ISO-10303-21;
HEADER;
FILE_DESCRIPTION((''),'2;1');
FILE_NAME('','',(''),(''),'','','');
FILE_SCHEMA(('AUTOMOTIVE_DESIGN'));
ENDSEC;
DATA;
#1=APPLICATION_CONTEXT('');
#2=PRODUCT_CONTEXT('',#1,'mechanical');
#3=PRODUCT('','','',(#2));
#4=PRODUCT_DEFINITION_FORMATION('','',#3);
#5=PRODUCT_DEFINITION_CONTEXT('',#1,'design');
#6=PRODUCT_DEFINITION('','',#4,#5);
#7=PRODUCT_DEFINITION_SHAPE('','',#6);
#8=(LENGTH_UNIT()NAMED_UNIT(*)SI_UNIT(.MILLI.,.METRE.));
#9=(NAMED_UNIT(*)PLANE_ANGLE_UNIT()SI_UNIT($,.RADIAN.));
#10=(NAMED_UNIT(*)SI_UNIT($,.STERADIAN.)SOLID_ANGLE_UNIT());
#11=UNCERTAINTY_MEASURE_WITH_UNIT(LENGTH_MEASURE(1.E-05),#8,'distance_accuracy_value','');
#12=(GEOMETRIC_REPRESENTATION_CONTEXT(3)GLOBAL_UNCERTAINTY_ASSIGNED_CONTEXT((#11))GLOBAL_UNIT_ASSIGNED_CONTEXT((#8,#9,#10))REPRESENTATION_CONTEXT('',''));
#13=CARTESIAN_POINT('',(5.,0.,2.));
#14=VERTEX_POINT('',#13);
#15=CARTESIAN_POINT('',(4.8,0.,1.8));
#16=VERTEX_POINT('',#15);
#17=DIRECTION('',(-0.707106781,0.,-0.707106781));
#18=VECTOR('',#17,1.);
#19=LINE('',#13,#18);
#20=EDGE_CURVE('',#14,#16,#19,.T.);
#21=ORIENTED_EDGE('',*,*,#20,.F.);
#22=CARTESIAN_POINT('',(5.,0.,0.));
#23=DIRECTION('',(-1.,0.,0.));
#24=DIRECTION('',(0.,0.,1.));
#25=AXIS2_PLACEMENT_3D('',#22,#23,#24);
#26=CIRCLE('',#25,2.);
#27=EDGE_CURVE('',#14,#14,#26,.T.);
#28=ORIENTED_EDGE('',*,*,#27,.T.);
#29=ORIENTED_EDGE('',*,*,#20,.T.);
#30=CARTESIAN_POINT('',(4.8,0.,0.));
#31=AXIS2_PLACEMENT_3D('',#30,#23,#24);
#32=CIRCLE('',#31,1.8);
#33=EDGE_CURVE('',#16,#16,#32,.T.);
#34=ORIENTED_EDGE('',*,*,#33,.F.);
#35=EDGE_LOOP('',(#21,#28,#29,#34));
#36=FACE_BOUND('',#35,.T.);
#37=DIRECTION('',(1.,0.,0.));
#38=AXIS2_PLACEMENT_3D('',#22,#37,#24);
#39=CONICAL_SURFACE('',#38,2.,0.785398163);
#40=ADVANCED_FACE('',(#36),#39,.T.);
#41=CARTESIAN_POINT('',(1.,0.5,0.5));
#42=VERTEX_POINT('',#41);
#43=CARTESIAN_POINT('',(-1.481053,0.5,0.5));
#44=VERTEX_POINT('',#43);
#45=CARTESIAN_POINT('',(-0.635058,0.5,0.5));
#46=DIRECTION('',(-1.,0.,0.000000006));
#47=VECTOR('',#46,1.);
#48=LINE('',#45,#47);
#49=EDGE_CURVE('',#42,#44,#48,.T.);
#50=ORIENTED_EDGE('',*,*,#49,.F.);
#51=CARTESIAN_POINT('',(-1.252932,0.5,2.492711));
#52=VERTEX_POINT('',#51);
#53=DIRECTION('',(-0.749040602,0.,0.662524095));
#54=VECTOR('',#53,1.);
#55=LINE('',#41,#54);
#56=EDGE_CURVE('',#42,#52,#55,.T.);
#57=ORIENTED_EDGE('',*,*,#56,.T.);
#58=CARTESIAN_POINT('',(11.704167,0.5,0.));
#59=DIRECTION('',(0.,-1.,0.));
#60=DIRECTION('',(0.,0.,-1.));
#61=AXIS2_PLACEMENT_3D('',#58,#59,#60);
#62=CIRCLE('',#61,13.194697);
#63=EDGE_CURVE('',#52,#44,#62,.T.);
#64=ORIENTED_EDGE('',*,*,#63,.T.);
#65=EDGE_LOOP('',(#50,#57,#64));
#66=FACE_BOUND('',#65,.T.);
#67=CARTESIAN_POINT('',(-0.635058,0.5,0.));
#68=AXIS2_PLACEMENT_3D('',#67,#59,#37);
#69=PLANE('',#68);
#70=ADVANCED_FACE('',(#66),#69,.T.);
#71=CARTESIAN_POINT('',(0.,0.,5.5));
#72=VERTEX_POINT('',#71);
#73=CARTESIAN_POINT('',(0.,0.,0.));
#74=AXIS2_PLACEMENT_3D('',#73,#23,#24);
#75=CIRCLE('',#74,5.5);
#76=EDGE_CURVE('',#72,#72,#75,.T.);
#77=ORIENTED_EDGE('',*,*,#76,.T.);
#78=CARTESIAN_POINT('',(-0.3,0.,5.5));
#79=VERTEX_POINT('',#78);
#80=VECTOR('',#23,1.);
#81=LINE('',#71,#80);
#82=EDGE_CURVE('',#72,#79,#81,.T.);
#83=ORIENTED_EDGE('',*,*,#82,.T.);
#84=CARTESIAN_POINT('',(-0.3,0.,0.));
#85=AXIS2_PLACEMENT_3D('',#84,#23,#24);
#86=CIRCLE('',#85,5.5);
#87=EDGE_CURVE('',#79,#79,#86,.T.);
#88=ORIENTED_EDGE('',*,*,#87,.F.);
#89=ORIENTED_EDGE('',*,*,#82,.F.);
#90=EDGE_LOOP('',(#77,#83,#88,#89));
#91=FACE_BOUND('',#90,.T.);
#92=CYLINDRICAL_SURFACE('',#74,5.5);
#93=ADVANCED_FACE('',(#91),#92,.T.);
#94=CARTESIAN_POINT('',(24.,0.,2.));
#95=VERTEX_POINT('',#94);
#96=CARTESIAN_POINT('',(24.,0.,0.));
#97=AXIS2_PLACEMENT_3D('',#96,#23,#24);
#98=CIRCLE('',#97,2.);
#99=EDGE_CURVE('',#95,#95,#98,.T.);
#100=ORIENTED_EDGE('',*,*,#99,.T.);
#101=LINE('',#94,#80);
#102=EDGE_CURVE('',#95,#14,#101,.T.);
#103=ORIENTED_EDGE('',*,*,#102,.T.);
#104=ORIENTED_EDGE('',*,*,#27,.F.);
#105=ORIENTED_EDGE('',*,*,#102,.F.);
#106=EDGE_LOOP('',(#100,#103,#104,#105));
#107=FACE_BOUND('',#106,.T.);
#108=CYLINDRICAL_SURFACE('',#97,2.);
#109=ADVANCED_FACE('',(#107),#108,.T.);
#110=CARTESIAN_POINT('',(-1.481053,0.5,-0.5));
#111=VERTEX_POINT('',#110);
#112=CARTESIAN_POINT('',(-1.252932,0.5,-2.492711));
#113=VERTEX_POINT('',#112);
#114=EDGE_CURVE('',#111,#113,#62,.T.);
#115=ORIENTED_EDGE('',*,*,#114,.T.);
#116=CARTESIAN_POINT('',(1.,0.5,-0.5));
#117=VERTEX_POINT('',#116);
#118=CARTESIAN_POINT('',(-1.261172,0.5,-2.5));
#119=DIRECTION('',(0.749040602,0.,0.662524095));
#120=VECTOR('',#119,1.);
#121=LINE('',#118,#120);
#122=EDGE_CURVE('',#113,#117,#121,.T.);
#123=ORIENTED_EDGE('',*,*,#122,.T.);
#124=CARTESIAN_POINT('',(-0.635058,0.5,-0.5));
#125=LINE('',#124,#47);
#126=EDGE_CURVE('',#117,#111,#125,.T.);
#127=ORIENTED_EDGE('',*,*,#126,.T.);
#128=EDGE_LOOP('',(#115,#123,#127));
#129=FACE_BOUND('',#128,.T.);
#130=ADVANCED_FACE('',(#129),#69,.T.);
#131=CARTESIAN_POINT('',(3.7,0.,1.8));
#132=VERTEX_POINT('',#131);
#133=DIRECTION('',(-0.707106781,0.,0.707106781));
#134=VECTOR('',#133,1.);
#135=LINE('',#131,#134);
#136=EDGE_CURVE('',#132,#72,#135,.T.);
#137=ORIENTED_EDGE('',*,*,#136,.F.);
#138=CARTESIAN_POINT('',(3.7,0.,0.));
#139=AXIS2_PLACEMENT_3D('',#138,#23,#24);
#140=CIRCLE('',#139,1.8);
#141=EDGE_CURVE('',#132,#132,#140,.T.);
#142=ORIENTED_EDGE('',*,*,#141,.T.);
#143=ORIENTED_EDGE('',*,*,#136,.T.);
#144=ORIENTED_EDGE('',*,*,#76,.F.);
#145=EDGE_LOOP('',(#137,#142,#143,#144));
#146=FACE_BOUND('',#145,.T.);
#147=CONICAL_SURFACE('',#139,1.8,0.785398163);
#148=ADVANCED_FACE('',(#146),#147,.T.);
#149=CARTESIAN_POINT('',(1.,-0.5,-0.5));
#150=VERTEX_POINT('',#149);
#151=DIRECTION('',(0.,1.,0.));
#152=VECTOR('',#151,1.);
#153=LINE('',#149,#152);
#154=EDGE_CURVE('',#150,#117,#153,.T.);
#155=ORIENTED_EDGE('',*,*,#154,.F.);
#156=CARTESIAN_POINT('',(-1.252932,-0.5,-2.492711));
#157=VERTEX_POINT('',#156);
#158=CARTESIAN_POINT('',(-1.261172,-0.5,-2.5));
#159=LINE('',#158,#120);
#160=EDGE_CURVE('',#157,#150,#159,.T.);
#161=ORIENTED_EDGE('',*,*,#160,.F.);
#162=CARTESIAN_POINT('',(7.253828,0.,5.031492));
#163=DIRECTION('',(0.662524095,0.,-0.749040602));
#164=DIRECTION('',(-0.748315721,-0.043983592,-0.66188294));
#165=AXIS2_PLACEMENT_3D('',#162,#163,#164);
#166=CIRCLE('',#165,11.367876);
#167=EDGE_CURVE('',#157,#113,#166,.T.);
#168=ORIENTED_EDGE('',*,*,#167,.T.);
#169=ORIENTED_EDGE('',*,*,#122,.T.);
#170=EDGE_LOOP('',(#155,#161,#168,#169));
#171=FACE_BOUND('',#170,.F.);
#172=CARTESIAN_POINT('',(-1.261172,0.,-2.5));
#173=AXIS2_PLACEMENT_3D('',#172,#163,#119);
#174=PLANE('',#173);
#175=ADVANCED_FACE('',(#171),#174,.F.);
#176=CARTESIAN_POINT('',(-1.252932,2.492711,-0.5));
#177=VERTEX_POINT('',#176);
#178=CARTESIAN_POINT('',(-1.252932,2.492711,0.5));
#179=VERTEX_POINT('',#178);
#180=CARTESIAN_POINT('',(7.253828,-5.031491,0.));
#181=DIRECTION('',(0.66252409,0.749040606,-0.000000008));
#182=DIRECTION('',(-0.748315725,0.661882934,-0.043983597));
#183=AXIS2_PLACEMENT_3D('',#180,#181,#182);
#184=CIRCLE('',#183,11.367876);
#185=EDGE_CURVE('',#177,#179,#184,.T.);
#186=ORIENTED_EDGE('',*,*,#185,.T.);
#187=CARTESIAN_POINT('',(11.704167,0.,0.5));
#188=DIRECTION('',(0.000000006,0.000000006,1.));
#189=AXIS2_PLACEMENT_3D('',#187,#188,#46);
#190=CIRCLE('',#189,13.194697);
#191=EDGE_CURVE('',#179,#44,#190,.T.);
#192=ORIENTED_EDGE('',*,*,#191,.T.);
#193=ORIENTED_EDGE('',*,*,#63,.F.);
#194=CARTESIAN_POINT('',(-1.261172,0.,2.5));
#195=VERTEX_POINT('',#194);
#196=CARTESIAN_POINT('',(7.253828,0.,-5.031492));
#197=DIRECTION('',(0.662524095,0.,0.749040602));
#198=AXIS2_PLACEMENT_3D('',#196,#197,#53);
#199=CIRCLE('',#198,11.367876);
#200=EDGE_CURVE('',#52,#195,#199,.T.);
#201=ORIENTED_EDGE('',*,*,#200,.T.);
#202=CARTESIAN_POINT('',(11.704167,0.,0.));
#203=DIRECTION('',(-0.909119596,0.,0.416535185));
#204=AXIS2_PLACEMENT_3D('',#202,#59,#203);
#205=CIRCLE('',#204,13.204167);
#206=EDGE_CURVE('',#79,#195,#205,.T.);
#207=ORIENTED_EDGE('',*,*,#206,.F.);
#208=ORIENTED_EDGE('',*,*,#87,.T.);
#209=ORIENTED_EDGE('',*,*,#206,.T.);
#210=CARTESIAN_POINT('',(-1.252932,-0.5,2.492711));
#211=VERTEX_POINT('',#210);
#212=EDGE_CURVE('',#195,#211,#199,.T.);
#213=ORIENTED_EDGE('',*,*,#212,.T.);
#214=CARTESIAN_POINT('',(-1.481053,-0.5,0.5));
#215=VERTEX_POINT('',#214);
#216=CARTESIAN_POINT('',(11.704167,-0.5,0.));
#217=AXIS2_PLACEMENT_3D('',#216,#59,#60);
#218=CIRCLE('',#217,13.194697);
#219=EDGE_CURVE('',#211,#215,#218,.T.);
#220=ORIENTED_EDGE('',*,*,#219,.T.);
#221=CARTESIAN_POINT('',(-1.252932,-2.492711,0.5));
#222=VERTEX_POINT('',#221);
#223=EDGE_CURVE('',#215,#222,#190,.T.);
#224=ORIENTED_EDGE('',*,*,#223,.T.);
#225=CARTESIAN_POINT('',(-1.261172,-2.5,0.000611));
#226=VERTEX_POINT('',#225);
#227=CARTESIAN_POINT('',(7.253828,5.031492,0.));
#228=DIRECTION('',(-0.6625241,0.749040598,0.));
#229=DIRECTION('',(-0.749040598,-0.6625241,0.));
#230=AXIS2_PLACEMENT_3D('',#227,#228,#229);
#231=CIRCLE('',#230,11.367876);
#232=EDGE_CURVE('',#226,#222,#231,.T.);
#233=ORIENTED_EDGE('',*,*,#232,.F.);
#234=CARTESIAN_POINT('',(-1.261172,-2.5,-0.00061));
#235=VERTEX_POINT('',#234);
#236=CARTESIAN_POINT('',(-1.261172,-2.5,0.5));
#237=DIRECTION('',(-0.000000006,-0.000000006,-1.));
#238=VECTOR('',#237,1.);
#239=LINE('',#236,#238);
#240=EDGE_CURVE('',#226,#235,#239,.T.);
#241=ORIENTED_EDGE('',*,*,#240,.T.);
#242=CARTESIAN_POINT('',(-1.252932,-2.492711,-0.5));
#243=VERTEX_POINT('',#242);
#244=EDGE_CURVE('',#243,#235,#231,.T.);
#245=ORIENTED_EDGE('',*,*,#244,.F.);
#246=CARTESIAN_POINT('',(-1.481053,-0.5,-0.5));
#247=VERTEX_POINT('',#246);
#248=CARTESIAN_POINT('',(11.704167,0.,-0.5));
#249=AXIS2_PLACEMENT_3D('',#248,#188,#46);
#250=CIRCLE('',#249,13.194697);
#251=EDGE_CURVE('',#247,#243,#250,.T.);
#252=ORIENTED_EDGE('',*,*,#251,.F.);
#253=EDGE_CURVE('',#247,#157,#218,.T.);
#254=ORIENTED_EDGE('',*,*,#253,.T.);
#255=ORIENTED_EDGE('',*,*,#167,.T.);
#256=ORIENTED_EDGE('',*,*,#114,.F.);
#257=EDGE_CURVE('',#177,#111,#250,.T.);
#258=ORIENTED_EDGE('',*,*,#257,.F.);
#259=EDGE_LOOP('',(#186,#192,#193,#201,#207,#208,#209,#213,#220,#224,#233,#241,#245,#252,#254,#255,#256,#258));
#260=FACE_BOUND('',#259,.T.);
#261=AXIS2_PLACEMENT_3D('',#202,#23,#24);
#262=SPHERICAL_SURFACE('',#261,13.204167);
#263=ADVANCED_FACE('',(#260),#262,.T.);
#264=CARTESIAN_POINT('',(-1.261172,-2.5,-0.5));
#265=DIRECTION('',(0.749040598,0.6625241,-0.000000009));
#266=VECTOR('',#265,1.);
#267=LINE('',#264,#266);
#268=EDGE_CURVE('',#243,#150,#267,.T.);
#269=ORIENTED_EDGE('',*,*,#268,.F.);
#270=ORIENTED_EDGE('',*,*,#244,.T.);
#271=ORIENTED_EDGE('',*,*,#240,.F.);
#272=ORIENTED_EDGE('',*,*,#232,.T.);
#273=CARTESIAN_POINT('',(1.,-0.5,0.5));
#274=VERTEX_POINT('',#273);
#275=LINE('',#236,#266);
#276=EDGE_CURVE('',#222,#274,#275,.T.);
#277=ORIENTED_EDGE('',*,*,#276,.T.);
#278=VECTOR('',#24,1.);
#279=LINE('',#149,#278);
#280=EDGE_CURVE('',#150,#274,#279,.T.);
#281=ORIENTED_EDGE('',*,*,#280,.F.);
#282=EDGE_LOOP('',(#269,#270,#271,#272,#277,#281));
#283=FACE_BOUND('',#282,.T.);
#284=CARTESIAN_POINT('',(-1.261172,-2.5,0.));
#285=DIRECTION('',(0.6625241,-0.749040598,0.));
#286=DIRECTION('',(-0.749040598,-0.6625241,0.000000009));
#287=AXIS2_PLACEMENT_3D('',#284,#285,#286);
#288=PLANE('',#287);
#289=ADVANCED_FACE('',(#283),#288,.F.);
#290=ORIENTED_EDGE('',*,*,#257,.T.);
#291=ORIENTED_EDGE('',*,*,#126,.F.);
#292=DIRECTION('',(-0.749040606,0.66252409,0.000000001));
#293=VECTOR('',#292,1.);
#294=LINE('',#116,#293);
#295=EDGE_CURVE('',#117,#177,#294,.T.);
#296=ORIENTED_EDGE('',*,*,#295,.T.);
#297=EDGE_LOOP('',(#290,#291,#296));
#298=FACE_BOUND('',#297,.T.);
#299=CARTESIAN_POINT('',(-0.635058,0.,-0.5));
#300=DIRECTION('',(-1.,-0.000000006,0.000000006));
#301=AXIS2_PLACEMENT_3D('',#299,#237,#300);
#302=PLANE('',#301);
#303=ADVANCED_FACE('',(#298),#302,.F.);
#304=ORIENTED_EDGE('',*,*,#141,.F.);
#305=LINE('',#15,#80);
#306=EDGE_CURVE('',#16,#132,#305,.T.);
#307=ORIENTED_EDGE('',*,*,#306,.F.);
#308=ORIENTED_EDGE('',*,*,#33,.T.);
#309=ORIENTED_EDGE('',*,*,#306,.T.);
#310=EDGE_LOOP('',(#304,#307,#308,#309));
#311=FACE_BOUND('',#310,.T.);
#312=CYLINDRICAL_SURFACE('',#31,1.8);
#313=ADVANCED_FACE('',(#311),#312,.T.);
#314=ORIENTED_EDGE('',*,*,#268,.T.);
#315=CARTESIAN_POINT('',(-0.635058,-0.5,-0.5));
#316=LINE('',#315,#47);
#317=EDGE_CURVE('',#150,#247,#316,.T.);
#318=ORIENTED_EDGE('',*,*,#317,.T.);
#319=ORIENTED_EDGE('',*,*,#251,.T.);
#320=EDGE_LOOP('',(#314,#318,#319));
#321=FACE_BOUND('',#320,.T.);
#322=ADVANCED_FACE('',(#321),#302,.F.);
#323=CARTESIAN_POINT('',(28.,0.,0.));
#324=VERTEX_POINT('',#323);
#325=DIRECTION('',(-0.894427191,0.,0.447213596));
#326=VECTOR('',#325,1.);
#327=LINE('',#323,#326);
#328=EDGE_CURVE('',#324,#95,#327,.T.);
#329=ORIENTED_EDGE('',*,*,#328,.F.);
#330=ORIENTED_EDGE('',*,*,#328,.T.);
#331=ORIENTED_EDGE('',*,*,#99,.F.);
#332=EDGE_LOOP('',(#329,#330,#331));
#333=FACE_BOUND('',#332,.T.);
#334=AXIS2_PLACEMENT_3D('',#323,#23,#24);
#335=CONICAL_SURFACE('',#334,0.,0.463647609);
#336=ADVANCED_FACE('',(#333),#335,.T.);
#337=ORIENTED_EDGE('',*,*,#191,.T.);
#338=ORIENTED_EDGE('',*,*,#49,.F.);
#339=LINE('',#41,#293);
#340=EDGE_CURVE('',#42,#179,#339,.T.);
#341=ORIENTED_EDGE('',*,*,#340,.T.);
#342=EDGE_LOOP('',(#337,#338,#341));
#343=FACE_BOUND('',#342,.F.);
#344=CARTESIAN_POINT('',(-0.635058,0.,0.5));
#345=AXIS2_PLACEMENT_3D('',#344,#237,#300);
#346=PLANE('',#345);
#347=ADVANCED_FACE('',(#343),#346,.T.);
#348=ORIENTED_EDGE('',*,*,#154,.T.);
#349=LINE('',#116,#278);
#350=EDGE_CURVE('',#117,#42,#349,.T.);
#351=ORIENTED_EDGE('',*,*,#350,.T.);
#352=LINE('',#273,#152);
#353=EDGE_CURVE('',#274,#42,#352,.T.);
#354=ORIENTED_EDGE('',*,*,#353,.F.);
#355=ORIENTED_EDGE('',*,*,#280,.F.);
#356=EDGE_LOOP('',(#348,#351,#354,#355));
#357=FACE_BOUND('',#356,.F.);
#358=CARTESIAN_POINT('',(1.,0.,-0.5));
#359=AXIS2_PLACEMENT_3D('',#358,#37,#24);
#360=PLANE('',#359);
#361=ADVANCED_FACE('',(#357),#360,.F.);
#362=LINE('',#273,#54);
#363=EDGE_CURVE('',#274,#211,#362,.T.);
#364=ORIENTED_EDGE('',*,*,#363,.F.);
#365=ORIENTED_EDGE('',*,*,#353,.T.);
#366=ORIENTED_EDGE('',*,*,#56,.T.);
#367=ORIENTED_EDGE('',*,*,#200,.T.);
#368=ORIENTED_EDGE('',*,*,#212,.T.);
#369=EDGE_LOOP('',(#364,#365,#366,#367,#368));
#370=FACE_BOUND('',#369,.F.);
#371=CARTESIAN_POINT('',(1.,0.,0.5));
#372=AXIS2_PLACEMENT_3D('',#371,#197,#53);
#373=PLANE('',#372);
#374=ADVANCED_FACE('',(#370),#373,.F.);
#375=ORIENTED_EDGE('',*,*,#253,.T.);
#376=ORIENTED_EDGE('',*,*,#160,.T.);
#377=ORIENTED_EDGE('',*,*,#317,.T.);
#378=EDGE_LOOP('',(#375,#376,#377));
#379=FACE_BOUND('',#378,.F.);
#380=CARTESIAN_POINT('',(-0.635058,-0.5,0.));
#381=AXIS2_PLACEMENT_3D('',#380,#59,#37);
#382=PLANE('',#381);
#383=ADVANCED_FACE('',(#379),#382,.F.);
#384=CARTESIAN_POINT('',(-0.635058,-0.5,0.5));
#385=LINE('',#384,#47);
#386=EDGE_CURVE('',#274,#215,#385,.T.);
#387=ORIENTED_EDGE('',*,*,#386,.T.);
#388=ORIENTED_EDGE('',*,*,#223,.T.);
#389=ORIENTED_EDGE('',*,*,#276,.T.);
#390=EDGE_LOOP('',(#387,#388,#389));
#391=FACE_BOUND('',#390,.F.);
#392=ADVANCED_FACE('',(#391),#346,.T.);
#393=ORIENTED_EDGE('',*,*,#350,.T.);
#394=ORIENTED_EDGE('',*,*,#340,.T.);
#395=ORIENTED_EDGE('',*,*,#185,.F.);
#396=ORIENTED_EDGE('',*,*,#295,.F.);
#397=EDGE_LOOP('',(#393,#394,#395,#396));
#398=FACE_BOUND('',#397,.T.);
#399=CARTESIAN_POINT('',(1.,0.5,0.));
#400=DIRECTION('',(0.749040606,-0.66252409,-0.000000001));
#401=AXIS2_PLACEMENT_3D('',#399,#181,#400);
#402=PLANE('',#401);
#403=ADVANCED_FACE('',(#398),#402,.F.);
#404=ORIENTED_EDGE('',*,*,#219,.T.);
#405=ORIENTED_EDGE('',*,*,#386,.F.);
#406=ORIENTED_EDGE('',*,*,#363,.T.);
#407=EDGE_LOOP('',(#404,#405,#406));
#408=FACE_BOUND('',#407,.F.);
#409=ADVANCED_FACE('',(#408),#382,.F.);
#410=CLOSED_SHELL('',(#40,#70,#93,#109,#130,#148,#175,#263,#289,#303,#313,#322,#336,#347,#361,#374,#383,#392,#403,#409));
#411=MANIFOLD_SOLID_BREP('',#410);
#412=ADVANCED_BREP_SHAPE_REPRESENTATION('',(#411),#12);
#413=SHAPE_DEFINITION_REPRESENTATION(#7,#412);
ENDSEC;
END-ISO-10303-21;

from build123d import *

# Parameters (mm, degrees)
F3_DEPTH = 0.5


# Not quite as in the source:
# - a pattern or mirror of a feature is missing from the dataset's text; its kind, count and spacing are read off the source's solid


with BuildPart() as f1:
    # F0 (on Front) → F1 (revolve)
    with BuildSketch(Plane.XZ):
        with BuildLine():
            Line((28, 0), (24, 2))
            Line((24, 2), (5, 2))
            Line((5, 2), (4.8, 1.8))
            Line((4.8, 1.8), (3.7, 1.8))
            Line((3.7, 1.8), (0, 5.5))
            Line((0, 5.5), (-0.3, 5.5))
            ThreePointArc((-0.3, 5.5), (-1.196512283, 2.814693589), (-1.5, 0))
            Line((-1.5, 0), (28, 0))
        make_face()
    revolve(axis=Axis((13.25, 0, 0), (-1, 0, 0)))

    # F2 (on Front) → F3 (cut, symmetric)
    with BuildSketch(Plane.XZ):
        Polygon((-1.2611724095, 2.5), (-1.5, 2.5), (-1.5, 0), (-1.5, -2.5), (-1.2611724095, -2.5), (1, -0.5), (1, 0), (1, 0.5), align=None)
    f3 = extrude(amount=F3_DEPTH, both=True, mode=Mode.SUBTRACT)

    # F3_copies: F3 across plane
    add(f3.mirror(Plane(origin=(0, 0, 0), x_dir=(0, 0.7071067832, 0.7071067792), z_dir=(4.5e-09, -0.7071067792, 0.7071067832))), mode=Mode.SUBTRACT)


solid = f1.part
